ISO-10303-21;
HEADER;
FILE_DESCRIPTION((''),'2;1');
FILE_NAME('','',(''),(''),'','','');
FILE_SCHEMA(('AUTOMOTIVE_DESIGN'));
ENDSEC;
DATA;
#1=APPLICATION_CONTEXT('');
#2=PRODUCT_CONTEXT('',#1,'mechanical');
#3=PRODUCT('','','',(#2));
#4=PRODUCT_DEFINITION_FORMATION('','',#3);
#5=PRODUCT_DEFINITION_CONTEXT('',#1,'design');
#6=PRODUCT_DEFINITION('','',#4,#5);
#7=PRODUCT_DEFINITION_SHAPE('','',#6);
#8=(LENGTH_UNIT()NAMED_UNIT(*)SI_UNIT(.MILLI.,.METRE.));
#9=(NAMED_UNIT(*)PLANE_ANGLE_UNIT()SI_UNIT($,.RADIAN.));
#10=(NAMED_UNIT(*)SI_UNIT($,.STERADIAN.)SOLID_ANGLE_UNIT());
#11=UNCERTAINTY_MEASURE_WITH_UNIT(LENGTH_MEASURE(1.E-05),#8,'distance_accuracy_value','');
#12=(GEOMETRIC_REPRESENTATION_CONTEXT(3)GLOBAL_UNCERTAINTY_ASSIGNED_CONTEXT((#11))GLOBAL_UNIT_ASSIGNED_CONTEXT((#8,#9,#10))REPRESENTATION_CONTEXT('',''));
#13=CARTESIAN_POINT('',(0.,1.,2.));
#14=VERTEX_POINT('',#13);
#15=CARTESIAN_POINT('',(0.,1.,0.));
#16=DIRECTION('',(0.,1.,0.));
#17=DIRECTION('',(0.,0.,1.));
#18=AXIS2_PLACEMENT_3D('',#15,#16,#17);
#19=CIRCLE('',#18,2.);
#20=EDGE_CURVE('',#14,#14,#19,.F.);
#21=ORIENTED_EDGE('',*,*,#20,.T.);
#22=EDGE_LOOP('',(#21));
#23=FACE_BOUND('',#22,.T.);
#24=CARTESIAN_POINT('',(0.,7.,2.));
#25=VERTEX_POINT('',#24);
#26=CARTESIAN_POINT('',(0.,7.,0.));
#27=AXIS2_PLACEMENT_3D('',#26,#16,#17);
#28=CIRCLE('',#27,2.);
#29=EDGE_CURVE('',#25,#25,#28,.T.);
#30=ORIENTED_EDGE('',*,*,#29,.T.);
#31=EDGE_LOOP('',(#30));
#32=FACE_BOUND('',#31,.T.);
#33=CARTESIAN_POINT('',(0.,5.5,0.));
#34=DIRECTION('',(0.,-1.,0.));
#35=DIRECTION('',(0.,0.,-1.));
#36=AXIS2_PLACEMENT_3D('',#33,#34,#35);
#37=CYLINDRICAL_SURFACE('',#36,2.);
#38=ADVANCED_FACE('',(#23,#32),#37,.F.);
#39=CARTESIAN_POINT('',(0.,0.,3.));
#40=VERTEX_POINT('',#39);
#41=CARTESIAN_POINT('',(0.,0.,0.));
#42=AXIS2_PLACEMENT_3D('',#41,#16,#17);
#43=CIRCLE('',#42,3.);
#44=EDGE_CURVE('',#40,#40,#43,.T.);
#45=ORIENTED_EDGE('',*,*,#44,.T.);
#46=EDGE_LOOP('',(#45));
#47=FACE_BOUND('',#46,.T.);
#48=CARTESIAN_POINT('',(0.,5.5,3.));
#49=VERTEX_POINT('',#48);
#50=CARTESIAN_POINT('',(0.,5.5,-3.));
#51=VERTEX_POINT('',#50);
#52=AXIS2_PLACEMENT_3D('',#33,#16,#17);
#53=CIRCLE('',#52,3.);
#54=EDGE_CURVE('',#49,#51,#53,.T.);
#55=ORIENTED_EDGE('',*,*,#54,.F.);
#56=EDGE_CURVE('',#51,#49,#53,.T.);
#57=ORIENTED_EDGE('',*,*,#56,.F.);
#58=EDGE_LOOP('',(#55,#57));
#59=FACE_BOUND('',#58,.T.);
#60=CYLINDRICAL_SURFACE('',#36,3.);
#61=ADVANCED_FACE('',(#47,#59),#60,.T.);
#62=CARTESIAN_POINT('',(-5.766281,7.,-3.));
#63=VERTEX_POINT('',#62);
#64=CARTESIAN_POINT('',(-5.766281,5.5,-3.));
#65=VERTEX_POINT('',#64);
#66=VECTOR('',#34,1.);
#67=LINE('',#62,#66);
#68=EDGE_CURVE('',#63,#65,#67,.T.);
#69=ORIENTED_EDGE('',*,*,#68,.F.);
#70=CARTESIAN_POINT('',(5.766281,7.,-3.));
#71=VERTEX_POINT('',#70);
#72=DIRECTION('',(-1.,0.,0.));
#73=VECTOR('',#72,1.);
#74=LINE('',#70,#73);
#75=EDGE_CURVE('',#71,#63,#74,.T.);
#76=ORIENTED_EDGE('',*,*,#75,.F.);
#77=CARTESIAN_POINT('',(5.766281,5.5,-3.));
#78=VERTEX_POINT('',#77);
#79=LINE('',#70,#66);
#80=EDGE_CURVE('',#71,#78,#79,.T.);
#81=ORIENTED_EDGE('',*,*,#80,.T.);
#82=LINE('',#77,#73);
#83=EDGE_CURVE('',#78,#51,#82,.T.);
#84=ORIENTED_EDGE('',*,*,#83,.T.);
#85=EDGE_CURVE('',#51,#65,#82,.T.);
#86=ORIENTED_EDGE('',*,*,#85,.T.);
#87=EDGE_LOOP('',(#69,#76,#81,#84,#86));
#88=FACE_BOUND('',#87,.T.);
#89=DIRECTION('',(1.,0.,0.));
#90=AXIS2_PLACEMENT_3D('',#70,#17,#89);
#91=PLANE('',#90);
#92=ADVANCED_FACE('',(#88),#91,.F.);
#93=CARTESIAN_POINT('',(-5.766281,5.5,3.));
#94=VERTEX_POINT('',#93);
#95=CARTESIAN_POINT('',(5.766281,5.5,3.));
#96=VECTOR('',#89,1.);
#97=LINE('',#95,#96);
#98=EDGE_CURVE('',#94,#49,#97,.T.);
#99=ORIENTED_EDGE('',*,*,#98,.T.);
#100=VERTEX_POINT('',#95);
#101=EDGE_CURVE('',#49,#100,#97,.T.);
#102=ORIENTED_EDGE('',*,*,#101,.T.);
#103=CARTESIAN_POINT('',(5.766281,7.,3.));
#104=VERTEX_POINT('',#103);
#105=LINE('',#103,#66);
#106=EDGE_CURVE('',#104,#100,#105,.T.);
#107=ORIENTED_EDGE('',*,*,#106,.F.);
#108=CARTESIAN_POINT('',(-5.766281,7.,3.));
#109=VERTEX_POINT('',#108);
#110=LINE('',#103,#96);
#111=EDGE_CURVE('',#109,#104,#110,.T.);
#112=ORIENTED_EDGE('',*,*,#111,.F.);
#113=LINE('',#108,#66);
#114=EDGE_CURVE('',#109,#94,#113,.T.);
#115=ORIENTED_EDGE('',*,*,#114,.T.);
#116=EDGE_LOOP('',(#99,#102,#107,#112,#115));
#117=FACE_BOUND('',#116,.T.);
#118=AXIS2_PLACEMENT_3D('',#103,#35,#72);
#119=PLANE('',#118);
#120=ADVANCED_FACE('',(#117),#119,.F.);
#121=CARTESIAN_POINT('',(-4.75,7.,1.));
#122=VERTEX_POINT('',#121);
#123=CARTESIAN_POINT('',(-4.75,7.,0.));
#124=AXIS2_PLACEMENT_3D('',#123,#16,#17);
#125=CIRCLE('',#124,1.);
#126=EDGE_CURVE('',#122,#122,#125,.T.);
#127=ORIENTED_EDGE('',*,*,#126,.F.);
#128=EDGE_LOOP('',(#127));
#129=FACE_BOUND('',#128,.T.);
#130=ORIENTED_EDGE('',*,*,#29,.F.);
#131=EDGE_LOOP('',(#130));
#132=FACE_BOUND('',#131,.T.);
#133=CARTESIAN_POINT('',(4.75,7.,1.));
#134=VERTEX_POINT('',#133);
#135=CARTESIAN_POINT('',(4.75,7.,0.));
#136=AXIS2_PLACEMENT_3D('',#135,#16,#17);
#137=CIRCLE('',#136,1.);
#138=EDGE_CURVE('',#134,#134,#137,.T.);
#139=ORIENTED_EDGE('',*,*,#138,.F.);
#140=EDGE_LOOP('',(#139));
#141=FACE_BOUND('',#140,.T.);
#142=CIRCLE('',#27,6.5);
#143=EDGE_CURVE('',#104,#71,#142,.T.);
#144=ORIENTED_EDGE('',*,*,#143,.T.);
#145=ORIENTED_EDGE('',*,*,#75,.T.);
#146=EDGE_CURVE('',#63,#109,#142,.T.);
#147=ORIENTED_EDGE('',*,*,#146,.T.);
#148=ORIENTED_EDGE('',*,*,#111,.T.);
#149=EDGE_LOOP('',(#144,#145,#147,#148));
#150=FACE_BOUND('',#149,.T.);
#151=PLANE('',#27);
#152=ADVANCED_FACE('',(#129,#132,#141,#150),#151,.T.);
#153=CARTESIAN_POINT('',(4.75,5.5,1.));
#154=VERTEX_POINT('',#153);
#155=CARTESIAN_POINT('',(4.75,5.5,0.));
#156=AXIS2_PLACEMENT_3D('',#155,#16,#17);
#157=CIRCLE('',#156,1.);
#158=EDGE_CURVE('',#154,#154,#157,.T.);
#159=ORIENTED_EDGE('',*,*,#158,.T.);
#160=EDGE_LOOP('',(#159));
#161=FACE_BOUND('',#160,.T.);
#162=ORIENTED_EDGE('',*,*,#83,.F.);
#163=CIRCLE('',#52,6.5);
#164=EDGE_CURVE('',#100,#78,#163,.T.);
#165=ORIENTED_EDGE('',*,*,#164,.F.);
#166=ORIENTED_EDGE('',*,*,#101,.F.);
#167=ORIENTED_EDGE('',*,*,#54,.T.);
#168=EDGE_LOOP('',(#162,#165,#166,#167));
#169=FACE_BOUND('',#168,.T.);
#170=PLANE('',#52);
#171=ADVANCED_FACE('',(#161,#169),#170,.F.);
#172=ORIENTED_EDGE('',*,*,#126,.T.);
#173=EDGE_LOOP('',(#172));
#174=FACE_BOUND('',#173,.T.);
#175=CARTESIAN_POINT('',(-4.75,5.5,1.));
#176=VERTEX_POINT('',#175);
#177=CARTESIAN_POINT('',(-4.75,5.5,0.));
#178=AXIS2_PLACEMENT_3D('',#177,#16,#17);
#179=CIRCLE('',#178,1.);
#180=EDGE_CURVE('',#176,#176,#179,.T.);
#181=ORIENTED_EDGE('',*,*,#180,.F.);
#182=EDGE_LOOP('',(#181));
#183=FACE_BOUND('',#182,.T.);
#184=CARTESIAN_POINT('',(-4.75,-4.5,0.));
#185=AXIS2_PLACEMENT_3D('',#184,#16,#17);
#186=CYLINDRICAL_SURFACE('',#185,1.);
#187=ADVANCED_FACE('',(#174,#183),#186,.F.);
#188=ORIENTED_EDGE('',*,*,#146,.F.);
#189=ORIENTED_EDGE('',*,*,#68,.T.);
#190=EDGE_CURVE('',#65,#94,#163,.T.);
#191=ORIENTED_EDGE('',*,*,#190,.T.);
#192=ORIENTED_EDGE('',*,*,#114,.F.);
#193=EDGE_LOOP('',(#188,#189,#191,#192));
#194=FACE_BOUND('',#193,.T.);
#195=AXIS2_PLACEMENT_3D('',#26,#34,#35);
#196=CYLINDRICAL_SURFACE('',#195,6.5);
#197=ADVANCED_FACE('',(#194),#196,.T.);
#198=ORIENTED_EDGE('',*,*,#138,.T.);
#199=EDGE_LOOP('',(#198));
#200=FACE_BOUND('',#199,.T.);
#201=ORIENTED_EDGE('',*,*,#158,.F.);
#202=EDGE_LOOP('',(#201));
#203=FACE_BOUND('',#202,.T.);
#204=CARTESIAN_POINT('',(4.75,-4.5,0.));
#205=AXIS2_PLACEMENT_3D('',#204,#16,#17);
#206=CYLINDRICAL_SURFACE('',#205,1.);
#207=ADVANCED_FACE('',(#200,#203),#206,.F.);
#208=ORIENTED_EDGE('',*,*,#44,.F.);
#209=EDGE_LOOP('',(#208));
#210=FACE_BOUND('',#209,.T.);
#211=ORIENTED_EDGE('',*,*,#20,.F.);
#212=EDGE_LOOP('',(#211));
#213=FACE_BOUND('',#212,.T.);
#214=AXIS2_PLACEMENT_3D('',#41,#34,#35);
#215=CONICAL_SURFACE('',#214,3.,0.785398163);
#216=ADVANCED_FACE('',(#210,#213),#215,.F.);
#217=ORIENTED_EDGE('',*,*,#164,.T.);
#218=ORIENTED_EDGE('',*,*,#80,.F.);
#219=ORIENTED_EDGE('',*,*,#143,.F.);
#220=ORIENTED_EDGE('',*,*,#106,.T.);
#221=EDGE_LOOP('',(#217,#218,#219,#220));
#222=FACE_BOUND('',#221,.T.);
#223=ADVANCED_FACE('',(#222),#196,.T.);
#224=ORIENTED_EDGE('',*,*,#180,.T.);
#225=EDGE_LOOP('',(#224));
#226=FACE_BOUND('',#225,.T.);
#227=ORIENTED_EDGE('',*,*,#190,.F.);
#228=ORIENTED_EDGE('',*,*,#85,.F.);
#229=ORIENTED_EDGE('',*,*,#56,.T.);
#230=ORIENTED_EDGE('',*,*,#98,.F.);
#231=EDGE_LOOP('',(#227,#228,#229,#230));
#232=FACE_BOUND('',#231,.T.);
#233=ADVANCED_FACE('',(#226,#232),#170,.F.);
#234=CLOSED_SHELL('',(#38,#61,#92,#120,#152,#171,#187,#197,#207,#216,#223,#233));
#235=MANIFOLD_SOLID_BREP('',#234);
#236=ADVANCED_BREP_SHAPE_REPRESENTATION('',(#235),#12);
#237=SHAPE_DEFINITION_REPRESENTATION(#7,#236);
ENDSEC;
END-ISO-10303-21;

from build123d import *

# Parameters (mm, degrees)
SKETCH1_R           = 3
SKETCH1_R_2         = 2
BOSS_EXTRUDE1_DEPTH = 5.5
BOSS_EXTRUDE2_DEPTH = 1.5
SKETCH3_R           = 2
CUT_EXTRUDE1_DEPTH  = 11.5
SKETCH4_R           = 1
CUT_EXTRUDE2_DEPTH  = 11.5
CHAMFER1_SIZE       = 1


with BuildPart() as part:
    # Sketch1 → Boss-Extrude1 (new body)
    with BuildSketch(Plane(origin=(0, 0, 0), x_dir=(1, 0, 0), z_dir=(0, 1, 0))):
        with Locations(Location((0, 0, 0), (0, 0, 270))):
            Circle(SKETCH1_R)
        with Locations(Location((0, 0, 0), (0, 0, 270))):
            Circle(SKETCH1_R_2, mode=Mode.SUBTRACT)
    extrude(amount=BOSS_EXTRUDE1_DEPTH)

    # Sketch2 → Boss-Extrude2 (add)
    with BuildSketch(Plane(origin=(0, 5.5, 0), x_dir=(1, 0, 0), z_dir=(0, 1, 0))):
        with BuildLine():
            Line((5.766281297, 3), (-5.766281297, 3))
            ThreePointArc((-5.766281297, 3), (-6.5, 0), (-5.766281297, -3))
            Line((-5.766281297, -3), (5.766281297, -3))
            ThreePointArc((5.766281297, -3), (6.5, 0), (5.766281297, 3))
        make_face()
    extrude(amount=BOSS_EXTRUDE2_DEPTH)

    # Sketch3 → Cut-Extrude1 (cut)
    with BuildSketch(Plane.XZ.offset(-5.5)):
        with Locations(Location((0, 0, 0), (0, 0, 90))):
            Circle(SKETCH3_R)
    extrude(amount=-CUT_EXTRUDE1_DEPTH, mode=Mode.SUBTRACT)

    # Sketch4 → Cut-Extrude2 (cut)
    with BuildSketch(Plane(origin=(0, 7, 0), x_dir=(1, 0, 0), z_dir=(0, 1, 0))):
        with Locations(Location((-4.75, 0, 0), (0, 0, 270))):
            Circle(SKETCH4_R)
        with Locations(Location((4.75, 0, 0), (0, 0, 270))):
            Circle(SKETCH4_R)
    extrude(amount=-CUT_EXTRUDE2_DEPTH, mode=Mode.SUBTRACT)

    # Chamfer1
    chamfer1_edges = [part.edges().sort_by_distance(p)[0] for p in [
        (0, 0, -2),
    ]]
    chamfer(chamfer1_edges, length=CHAMFER1_SIZE - 0.0001)  # a hair under: the kernel refuses the full size


solid = part.part
